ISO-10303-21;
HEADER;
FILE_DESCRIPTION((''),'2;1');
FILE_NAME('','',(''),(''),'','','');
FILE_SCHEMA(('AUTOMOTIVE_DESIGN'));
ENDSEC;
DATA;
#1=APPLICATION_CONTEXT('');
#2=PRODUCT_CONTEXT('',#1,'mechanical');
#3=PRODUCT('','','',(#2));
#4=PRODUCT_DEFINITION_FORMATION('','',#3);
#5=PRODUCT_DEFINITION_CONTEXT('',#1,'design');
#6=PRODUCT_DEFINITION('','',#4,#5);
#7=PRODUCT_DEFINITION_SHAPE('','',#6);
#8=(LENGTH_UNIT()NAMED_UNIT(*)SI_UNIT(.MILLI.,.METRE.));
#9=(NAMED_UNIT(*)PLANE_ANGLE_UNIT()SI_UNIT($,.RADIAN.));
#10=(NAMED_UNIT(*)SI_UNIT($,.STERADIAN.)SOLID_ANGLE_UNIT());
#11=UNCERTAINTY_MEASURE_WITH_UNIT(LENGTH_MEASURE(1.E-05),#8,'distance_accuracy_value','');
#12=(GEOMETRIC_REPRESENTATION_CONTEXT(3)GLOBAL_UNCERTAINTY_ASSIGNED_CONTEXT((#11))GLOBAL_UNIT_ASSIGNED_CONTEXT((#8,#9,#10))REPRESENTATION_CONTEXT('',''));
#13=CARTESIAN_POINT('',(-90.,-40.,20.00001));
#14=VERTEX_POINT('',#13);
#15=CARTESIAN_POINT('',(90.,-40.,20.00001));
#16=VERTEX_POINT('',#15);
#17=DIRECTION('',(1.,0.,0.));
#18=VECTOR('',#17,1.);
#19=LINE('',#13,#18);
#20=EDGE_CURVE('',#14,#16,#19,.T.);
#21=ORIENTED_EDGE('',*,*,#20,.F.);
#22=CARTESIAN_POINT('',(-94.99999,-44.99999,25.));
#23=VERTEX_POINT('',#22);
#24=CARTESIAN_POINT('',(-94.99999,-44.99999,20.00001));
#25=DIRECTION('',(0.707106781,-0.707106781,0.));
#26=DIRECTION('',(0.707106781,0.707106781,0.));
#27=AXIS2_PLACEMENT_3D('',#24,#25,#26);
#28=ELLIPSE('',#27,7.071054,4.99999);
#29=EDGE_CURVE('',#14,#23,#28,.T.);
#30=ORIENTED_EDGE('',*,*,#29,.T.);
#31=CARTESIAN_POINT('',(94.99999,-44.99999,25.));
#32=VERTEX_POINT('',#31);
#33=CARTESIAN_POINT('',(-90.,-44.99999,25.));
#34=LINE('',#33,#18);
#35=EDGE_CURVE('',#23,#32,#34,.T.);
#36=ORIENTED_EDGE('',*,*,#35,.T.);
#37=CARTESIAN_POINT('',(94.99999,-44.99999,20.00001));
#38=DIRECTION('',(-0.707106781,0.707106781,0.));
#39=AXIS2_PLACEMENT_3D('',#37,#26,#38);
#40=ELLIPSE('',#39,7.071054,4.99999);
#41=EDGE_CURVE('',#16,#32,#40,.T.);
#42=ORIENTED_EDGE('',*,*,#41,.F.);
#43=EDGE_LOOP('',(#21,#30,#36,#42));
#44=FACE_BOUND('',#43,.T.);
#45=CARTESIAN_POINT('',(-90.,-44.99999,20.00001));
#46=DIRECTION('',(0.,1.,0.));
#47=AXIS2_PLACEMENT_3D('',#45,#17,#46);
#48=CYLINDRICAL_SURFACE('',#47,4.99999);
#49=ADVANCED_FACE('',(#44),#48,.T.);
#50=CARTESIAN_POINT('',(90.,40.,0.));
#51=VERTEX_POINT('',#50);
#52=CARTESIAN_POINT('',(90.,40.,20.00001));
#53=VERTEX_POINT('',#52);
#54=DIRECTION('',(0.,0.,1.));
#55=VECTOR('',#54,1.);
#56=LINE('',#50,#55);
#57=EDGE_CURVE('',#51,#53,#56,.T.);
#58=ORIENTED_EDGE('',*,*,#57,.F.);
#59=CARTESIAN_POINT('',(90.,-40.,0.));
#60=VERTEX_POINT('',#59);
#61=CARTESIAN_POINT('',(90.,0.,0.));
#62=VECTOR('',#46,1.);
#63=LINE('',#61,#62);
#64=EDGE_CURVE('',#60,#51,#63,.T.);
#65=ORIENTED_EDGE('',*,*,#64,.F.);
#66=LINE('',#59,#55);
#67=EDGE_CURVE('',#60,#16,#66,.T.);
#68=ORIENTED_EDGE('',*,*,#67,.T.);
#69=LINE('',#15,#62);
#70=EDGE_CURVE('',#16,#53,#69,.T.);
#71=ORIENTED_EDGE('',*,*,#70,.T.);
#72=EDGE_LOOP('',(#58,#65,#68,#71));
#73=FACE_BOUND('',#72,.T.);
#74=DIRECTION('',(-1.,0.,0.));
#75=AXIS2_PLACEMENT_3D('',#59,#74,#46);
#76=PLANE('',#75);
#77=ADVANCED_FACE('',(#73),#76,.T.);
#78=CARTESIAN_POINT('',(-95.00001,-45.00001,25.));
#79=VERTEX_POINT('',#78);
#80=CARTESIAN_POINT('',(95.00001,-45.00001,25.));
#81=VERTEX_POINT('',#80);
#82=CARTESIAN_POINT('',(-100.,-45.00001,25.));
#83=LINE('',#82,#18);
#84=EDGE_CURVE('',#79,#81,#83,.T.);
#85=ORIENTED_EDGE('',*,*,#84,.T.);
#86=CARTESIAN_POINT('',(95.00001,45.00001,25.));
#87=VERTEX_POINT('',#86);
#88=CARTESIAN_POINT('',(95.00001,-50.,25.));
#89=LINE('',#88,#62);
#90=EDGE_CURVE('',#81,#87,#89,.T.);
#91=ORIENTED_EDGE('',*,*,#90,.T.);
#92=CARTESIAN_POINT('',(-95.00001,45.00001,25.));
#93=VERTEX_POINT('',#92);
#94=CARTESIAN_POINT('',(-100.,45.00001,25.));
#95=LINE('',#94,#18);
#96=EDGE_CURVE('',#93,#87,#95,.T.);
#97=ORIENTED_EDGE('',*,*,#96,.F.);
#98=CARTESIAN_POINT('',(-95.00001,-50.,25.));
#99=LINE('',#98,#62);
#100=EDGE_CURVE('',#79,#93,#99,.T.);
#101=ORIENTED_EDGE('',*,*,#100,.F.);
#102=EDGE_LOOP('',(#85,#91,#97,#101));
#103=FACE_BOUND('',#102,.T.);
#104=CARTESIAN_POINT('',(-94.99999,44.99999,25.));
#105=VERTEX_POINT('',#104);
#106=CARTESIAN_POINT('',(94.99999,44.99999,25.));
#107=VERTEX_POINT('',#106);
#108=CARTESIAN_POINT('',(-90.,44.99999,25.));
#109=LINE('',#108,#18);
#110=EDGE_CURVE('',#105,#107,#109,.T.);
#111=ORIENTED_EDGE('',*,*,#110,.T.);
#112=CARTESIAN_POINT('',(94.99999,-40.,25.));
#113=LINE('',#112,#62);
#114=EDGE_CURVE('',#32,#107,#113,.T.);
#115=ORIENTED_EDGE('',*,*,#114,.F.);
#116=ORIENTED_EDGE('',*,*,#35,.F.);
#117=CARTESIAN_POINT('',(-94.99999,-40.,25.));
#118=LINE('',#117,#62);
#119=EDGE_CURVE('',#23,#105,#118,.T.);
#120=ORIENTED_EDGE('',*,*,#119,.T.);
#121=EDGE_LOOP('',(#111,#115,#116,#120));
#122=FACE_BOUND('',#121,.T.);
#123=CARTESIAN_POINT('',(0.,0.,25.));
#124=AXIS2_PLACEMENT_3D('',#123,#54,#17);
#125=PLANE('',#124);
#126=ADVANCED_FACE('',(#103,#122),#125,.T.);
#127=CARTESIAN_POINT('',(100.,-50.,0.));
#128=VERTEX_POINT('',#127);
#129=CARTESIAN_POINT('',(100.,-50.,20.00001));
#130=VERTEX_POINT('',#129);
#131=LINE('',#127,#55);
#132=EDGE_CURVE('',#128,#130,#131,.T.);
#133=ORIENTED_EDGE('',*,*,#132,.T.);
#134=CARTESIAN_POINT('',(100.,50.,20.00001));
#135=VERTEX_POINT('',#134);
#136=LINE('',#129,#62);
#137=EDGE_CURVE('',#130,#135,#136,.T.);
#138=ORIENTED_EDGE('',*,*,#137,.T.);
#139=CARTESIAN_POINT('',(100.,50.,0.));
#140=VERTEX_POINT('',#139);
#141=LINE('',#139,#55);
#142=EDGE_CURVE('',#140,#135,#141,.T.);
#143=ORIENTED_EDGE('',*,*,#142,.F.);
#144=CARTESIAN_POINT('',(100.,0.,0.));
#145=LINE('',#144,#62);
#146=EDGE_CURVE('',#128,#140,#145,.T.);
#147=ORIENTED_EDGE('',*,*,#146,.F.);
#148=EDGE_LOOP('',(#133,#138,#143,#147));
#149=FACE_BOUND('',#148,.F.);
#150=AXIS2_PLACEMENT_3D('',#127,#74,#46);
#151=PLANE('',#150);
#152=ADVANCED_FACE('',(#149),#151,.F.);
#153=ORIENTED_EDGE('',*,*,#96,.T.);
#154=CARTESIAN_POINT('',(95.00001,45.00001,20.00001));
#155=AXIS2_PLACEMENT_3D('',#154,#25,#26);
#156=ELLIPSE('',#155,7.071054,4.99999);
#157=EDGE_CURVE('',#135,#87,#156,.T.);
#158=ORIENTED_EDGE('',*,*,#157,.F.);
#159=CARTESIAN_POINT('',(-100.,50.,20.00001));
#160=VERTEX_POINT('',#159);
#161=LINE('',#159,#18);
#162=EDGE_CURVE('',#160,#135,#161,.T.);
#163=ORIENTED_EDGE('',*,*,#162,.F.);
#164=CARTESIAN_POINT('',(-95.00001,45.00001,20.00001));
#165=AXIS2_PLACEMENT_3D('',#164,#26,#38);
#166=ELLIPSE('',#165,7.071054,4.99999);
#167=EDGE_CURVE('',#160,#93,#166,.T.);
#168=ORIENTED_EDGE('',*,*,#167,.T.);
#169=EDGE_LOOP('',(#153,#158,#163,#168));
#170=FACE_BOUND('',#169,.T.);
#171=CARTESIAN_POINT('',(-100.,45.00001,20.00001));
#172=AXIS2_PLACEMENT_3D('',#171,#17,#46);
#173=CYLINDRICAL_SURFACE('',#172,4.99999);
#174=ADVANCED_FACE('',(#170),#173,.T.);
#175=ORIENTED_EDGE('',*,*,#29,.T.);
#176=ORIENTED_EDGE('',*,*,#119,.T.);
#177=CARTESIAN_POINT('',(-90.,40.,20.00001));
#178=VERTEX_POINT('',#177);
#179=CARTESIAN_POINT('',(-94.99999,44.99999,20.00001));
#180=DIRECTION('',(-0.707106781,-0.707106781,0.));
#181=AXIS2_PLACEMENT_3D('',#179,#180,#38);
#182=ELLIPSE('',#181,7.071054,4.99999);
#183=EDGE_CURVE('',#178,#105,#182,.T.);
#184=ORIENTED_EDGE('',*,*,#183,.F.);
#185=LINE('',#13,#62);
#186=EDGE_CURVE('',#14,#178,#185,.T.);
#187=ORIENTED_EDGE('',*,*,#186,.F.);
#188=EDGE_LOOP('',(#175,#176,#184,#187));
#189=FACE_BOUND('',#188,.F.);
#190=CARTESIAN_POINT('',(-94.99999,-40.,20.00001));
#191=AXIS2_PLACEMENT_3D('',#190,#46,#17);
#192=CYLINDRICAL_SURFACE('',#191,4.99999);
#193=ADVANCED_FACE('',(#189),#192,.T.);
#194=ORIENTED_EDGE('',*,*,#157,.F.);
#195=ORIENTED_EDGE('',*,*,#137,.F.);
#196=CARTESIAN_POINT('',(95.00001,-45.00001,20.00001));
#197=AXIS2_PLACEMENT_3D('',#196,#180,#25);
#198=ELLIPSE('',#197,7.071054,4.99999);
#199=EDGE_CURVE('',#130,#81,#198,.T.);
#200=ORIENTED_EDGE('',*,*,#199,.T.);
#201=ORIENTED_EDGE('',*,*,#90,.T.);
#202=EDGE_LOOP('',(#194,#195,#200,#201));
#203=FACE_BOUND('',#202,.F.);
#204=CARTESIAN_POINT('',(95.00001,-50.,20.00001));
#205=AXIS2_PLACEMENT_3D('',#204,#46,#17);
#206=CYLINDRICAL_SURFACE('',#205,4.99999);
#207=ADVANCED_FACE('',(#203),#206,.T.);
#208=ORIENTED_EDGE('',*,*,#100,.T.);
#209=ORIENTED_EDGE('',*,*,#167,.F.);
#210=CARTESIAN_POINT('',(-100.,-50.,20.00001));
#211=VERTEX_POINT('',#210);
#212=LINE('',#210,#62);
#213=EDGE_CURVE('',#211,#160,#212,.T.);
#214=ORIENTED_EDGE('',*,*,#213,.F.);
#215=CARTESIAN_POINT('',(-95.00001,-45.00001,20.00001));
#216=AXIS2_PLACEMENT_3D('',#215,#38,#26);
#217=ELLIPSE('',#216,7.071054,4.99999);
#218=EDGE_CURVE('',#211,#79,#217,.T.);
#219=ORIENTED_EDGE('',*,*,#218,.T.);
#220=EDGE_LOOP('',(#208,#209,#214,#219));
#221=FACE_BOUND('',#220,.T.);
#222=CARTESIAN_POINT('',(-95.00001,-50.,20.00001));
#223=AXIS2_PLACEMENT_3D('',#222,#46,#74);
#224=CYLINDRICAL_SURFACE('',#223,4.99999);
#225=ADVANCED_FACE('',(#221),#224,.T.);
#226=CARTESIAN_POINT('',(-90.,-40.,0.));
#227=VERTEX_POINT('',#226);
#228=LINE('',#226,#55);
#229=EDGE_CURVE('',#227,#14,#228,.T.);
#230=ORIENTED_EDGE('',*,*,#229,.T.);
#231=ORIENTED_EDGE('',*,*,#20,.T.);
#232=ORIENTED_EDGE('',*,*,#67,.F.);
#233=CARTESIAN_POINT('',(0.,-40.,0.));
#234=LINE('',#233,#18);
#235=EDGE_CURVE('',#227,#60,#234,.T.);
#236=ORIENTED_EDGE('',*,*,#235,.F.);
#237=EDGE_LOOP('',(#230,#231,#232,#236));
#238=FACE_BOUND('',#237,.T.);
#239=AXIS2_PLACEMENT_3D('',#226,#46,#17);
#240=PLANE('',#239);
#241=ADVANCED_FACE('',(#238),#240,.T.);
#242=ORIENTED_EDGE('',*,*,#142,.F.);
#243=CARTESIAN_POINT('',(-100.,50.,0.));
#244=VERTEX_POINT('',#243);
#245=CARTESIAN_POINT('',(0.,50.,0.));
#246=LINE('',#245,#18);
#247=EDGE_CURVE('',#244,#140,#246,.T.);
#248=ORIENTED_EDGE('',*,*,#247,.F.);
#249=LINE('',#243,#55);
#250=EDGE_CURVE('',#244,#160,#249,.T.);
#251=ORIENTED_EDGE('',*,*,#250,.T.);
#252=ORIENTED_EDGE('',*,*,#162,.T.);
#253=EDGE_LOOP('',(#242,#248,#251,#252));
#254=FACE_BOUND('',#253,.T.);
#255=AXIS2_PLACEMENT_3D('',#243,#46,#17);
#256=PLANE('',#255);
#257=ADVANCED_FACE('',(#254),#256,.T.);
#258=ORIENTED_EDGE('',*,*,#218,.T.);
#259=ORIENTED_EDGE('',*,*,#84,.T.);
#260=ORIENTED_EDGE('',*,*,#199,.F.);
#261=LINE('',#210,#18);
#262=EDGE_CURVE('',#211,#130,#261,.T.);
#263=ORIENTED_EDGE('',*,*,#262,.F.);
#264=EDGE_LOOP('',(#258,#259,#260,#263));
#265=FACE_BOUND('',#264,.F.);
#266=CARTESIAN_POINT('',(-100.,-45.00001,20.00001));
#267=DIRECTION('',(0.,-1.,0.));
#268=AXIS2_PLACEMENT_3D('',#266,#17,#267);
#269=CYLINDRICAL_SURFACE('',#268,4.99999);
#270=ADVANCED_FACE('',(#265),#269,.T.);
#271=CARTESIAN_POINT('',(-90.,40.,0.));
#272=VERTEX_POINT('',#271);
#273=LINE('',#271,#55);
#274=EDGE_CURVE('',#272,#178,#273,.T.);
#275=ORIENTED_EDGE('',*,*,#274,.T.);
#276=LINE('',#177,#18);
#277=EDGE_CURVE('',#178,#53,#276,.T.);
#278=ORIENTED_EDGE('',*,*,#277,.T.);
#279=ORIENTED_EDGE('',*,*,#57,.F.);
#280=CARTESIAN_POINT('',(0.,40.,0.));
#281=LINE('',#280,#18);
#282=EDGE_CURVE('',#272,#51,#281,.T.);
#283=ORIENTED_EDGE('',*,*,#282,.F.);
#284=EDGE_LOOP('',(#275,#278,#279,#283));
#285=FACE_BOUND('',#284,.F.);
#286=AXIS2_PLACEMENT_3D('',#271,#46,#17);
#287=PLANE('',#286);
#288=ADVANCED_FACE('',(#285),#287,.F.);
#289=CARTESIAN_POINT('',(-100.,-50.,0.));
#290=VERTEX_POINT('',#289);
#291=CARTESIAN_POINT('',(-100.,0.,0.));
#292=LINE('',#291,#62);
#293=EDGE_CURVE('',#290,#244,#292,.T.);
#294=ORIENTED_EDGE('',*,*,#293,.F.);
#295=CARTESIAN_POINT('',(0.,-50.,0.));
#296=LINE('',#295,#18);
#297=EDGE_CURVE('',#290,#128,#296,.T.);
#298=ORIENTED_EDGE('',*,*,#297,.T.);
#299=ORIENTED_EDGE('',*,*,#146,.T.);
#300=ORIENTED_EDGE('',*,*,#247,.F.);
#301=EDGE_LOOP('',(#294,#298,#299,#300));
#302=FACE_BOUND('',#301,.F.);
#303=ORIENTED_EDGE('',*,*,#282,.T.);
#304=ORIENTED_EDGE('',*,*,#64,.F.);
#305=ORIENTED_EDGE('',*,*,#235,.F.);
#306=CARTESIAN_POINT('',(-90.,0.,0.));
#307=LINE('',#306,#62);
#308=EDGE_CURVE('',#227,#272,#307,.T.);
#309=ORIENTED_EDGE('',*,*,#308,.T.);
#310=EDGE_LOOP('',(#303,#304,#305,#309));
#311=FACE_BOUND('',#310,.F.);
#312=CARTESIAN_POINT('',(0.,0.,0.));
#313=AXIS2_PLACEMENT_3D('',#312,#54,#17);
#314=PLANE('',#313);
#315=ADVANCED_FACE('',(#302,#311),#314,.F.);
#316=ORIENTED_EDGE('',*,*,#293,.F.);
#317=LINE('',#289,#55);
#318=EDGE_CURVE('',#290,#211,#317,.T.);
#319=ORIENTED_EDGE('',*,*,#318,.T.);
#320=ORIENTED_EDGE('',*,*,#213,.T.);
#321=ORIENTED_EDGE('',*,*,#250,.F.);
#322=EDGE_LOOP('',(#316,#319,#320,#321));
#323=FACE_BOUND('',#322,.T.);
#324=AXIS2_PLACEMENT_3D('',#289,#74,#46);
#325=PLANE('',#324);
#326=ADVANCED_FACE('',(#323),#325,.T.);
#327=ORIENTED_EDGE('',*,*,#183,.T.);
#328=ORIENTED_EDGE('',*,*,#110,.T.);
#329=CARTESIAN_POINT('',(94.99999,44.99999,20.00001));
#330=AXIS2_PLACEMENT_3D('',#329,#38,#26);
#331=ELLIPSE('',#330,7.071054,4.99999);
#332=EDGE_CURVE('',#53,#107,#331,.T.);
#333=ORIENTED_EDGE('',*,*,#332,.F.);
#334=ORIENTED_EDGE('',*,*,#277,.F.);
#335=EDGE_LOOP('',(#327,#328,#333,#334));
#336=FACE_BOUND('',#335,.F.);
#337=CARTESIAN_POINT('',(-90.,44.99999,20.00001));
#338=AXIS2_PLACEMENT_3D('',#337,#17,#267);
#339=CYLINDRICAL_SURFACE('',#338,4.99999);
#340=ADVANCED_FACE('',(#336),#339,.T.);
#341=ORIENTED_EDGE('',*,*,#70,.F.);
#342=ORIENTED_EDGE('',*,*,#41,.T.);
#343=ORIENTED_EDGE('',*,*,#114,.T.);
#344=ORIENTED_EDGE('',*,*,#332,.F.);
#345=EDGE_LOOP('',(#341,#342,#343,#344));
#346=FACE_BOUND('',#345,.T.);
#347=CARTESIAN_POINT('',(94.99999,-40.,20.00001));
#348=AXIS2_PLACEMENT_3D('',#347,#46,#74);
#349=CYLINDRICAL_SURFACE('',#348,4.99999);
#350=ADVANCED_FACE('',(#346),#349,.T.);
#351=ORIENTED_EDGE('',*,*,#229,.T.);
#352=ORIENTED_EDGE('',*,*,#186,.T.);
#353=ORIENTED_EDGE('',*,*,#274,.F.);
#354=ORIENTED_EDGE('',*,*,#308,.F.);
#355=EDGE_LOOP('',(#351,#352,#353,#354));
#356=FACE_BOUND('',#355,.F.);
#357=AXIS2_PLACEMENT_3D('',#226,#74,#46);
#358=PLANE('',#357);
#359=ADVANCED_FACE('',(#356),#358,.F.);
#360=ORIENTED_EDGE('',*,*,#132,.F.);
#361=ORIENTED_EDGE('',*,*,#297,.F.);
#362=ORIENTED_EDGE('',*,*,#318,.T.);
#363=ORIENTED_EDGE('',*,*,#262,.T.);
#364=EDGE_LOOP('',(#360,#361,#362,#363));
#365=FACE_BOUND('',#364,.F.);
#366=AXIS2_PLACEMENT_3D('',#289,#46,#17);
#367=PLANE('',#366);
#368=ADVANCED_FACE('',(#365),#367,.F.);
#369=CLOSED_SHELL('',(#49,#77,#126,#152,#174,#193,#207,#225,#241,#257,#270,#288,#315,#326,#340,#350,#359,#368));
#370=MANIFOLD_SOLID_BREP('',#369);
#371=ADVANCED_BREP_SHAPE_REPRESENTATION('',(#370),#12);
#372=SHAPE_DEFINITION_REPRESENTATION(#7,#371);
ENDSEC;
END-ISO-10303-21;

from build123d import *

# Parameters (mm, degrees)
F0_W     = 200
F0_H     = 100
F0_W_2   = 180
F0_H_2   = 80
F1_DEPTH = 25
F2_R     = 4.99999


# Not quite as in the source:
# - a fillet or chamfer is up to 0.001 mm smaller than in the source, because OpenCascade refuses the exact size


with BuildPart() as f1:
    # F0 (on Top) → F1 (new body)
    with BuildSketch(Plane.XY):
        Rectangle(F0_W, F0_H)
        Rectangle(F0_W_2, F0_H_2, mode=Mode.SUBTRACT)
    extrude(amount=F1_DEPTH)

    # F2 (radius 5 in the source; OpenCascade refuses exactly that, so slightly less here)
    f2_edges = [f1.edges().sort_by_distance(p)[0] for p in [
        (-100, 0, 25),
        (0, 50, 25),
        (0, -50, 25),
        (100, 0, 25),
        (90, 0, 25),
        (0, -40, 25),
        (-90, 0, 25),
        (0, 40, 25),
    ]]
    fillet(f2_edges, radius=F2_R)


solid = f1.part
